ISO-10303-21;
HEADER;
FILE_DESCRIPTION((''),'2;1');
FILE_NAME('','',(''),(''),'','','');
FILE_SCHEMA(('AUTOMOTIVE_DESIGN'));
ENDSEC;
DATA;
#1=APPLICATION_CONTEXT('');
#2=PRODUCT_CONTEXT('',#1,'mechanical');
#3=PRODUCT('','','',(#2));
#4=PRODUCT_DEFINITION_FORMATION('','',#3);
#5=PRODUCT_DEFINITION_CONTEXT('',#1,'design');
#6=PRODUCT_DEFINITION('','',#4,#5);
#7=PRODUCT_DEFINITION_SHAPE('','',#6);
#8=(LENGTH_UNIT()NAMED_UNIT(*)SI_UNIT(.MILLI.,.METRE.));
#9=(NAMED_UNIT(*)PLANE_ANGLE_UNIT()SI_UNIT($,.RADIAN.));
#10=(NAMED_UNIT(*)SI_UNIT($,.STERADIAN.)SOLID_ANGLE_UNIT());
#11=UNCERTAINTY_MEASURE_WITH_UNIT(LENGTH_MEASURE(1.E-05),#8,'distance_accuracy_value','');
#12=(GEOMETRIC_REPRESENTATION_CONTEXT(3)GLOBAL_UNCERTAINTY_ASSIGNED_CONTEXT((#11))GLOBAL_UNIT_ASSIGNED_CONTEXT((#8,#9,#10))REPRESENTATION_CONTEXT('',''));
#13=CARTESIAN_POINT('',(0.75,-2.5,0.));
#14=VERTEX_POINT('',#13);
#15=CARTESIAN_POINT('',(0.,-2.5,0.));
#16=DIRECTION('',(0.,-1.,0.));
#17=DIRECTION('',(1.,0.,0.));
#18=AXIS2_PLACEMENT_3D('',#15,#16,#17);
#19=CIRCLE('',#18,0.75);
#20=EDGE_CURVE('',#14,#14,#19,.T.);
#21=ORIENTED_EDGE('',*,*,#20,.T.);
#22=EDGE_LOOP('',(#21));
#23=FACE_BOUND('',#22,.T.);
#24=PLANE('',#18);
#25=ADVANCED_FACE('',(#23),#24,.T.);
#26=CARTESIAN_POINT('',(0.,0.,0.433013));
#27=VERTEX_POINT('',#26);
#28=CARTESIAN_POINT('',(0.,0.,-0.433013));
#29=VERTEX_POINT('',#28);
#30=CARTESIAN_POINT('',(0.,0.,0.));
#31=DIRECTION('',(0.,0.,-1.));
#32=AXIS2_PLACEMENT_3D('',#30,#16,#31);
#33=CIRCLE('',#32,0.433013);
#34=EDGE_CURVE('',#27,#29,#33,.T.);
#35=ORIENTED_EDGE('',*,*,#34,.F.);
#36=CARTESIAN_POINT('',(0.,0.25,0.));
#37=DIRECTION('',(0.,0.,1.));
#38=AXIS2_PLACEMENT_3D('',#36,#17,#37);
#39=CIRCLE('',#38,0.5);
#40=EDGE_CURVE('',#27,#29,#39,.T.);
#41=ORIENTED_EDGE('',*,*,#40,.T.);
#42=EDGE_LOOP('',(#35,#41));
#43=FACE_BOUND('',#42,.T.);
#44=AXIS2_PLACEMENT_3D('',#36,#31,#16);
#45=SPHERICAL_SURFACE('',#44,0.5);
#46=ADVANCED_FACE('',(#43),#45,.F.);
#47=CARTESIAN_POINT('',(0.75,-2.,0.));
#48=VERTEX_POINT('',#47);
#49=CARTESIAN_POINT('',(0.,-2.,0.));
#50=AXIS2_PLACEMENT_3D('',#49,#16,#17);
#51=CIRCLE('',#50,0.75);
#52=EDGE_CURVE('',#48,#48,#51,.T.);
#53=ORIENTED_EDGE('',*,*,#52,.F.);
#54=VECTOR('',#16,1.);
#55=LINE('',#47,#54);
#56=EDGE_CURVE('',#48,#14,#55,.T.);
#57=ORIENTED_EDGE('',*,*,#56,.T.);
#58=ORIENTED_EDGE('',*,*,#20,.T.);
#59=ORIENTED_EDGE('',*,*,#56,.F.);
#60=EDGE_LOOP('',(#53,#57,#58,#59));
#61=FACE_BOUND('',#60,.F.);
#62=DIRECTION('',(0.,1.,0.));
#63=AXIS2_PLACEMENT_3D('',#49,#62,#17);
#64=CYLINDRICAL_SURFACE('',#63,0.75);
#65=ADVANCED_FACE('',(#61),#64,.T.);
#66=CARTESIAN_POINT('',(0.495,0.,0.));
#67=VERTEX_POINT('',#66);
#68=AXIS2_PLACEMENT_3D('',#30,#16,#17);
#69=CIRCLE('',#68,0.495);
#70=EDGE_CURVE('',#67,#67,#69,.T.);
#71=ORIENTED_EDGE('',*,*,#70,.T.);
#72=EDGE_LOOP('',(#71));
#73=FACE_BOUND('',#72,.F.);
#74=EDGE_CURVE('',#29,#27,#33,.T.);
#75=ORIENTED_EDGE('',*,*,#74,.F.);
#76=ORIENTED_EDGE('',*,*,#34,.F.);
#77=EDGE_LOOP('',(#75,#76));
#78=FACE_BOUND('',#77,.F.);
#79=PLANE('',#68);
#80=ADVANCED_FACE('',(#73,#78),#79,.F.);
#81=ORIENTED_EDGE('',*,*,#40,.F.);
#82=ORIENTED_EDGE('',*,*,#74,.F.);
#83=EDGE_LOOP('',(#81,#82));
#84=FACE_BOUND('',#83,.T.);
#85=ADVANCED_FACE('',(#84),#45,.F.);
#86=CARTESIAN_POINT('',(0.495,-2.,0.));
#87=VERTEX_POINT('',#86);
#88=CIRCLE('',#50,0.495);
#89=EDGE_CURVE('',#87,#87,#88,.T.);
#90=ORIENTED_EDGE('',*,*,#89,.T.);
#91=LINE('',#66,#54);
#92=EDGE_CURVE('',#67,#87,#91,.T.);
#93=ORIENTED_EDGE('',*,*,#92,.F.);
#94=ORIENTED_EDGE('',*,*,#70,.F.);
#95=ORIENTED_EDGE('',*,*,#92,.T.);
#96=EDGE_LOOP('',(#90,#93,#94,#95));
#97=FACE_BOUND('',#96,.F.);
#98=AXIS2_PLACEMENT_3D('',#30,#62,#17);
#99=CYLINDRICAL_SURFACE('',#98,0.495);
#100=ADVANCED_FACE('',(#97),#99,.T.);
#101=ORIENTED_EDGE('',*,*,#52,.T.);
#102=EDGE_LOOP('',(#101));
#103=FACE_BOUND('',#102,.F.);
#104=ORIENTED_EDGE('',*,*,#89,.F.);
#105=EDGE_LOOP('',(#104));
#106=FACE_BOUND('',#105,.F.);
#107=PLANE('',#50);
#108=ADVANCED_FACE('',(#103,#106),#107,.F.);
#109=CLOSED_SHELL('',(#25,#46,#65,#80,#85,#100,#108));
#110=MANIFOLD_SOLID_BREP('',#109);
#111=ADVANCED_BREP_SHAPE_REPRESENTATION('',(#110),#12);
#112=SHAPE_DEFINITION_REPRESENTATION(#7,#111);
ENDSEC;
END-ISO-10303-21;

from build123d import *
from build123d import SkipClean  # not in build123d's __all__

# Parameters (mm, degrees)
F0_R     = 0.495
F1_DEPTH = 2
F2_R     = 0.75
F2_R_2   = 0.495
F3_DEPTH = 0.5


with BuildPart() as f1:
    # F0 (on Front) → F1 (new body)
    with BuildSketch(Plane.XZ):
        Circle(F0_R)
    extrude(amount=F1_DEPTH)

    # F2 (on face) → F3 (join)
    with BuildSketch(Plane.XZ.offset(2)):
        Circle(F2_R)
        Circle(F2_R_2, mode=Mode.SUBTRACT)
        Circle(F2_R_2)
    extrude(amount=F3_DEPTH)

    # F4 (on Right) → F5 (revolve, cut)
    with BuildSketch(Plane.YZ):
        with BuildLine():
            Line((0.25, 0), (0.25, 0.5))
            ThreePointArc((0.25, 0.5), (-0.25, 0), (0.25, -0.5))
            Line((0.25, -0.5), (0.25, 0))
        make_face()
    with SkipClean():  # cleaning this boolean's faces spoils the solid; the shape is the same uncleaned
        revolve(axis=Axis((0, 0.25, 0.25), (0, 0, 1)), mode=Mode.SUBTRACT)


solid = f1.part
